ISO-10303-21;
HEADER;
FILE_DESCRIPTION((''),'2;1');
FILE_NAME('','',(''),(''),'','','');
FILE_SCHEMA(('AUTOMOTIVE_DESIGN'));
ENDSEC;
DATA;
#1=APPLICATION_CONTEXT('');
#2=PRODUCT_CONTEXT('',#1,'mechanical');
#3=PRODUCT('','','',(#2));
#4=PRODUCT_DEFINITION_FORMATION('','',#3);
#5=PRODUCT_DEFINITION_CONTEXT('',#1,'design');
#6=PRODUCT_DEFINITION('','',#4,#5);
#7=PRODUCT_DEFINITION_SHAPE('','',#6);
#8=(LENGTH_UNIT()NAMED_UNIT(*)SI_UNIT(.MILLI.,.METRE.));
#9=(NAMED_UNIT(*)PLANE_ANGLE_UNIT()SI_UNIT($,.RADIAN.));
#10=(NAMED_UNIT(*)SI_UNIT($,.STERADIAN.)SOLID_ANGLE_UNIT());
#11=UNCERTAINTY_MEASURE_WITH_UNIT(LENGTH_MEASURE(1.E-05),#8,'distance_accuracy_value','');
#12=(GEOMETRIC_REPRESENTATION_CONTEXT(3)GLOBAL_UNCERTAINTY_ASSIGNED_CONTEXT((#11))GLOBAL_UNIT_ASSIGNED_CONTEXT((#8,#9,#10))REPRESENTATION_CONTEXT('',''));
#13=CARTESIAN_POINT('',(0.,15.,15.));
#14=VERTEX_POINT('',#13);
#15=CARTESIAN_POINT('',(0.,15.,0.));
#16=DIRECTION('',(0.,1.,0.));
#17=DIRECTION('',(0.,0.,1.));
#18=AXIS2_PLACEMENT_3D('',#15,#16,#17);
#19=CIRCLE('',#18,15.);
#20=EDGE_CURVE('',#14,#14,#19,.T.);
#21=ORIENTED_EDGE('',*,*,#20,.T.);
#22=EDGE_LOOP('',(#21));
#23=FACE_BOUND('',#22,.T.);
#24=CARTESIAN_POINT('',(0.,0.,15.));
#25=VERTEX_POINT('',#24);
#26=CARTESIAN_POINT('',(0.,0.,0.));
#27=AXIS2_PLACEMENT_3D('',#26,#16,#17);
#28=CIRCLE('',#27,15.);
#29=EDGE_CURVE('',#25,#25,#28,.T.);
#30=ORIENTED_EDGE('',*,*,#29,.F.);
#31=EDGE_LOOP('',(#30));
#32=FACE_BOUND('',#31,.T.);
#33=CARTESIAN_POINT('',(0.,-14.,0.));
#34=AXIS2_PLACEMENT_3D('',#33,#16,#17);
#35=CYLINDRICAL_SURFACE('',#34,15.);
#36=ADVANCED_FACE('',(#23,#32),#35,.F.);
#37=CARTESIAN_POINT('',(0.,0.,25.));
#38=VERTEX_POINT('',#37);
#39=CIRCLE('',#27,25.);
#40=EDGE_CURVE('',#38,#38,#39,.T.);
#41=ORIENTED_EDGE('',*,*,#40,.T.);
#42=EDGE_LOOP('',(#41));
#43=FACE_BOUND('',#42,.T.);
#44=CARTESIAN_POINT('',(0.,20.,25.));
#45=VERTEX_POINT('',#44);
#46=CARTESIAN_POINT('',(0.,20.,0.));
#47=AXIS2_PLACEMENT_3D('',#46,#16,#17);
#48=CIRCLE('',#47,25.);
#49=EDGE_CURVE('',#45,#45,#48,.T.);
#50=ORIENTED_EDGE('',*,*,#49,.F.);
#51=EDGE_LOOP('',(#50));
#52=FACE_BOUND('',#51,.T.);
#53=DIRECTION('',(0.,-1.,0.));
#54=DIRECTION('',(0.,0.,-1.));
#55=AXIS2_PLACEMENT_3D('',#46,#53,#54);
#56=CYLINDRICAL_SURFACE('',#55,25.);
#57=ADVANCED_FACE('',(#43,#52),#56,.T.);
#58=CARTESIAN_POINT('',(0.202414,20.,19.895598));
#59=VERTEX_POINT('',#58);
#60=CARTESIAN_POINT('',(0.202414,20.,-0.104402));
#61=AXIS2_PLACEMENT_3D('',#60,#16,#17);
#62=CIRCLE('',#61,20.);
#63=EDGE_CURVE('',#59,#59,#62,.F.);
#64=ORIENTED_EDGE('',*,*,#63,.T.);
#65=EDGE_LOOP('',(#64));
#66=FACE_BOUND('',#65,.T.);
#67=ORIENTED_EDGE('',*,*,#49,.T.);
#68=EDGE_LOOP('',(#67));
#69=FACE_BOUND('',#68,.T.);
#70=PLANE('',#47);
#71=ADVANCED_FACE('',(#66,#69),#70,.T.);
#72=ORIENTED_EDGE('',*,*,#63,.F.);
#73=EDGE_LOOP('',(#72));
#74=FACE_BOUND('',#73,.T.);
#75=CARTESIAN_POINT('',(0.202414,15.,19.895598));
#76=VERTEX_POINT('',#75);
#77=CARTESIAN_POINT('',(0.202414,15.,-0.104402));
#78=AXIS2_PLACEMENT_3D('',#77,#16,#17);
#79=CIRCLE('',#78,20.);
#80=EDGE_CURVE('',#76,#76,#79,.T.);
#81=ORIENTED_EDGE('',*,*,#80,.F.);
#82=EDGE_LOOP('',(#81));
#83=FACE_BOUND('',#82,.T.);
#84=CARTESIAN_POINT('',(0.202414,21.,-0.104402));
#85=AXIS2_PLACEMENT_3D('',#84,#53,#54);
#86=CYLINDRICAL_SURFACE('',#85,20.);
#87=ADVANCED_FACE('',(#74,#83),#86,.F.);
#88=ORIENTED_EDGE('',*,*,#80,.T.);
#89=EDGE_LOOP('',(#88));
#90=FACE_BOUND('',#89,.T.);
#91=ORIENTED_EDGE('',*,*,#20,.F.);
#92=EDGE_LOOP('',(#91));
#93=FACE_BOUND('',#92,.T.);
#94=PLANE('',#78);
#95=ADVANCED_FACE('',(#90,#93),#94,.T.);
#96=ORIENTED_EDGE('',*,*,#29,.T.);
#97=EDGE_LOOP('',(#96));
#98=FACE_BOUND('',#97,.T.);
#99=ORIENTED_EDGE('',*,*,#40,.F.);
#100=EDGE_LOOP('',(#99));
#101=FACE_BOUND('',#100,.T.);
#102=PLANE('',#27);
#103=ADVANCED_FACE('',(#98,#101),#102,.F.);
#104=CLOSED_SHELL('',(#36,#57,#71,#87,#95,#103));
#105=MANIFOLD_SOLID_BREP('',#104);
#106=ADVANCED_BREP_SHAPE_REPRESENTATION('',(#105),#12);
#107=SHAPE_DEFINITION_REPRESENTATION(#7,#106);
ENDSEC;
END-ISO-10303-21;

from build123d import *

# Parameters (mm, degrees)
SKETCH1_R               = 25
BOSS_EXTRUDE5_DEPTH     = 20
CUT_EXTRUDE2_DEPTH      = 1
CUT_EXTRUDE2_DEPTH_BACK = 5
SKETCH5_R               = 20
SKETCH9_R               = 15
CUT_EXTRUDE3_DEPTH      = 29


with BuildPart() as part:
    # Sketch1 → Boss-Extrude5 (new body)
    with BuildSketch(Plane(origin=(0, 0, 0), x_dir=(1, 0, 0), z_dir=(0, 1, 0))):
        Circle(SKETCH1_R)
    extrude(amount=BOSS_EXTRUDE5_DEPTH)

    # Sketch5 → Cut-Extrude2 (cut, two sides: drawn at the far end of the back side and taken through both)
    with BuildSketch(Plane(origin=(0, 20, 0), x_dir=(1, 0, 0), z_dir=(0, 1, 0)).offset(-CUT_EXTRUDE2_DEPTH_BACK)):
        with Locations((0.202413874, 0.104402365)):
            Circle(SKETCH5_R)
    extrude(amount=CUT_EXTRUDE2_DEPTH + CUT_EXTRUDE2_DEPTH_BACK, mode=Mode.SUBTRACT)

    # Sketch9 → Cut-Extrude3 (cut)
    with BuildSketch(Plane(origin=(0, 15, 0), x_dir=(1, 0, 0), z_dir=(0, 1, 0))):
        Circle(SKETCH9_R)
    extrude(amount=-CUT_EXTRUDE3_DEPTH, mode=Mode.SUBTRACT)


solid = part.part
